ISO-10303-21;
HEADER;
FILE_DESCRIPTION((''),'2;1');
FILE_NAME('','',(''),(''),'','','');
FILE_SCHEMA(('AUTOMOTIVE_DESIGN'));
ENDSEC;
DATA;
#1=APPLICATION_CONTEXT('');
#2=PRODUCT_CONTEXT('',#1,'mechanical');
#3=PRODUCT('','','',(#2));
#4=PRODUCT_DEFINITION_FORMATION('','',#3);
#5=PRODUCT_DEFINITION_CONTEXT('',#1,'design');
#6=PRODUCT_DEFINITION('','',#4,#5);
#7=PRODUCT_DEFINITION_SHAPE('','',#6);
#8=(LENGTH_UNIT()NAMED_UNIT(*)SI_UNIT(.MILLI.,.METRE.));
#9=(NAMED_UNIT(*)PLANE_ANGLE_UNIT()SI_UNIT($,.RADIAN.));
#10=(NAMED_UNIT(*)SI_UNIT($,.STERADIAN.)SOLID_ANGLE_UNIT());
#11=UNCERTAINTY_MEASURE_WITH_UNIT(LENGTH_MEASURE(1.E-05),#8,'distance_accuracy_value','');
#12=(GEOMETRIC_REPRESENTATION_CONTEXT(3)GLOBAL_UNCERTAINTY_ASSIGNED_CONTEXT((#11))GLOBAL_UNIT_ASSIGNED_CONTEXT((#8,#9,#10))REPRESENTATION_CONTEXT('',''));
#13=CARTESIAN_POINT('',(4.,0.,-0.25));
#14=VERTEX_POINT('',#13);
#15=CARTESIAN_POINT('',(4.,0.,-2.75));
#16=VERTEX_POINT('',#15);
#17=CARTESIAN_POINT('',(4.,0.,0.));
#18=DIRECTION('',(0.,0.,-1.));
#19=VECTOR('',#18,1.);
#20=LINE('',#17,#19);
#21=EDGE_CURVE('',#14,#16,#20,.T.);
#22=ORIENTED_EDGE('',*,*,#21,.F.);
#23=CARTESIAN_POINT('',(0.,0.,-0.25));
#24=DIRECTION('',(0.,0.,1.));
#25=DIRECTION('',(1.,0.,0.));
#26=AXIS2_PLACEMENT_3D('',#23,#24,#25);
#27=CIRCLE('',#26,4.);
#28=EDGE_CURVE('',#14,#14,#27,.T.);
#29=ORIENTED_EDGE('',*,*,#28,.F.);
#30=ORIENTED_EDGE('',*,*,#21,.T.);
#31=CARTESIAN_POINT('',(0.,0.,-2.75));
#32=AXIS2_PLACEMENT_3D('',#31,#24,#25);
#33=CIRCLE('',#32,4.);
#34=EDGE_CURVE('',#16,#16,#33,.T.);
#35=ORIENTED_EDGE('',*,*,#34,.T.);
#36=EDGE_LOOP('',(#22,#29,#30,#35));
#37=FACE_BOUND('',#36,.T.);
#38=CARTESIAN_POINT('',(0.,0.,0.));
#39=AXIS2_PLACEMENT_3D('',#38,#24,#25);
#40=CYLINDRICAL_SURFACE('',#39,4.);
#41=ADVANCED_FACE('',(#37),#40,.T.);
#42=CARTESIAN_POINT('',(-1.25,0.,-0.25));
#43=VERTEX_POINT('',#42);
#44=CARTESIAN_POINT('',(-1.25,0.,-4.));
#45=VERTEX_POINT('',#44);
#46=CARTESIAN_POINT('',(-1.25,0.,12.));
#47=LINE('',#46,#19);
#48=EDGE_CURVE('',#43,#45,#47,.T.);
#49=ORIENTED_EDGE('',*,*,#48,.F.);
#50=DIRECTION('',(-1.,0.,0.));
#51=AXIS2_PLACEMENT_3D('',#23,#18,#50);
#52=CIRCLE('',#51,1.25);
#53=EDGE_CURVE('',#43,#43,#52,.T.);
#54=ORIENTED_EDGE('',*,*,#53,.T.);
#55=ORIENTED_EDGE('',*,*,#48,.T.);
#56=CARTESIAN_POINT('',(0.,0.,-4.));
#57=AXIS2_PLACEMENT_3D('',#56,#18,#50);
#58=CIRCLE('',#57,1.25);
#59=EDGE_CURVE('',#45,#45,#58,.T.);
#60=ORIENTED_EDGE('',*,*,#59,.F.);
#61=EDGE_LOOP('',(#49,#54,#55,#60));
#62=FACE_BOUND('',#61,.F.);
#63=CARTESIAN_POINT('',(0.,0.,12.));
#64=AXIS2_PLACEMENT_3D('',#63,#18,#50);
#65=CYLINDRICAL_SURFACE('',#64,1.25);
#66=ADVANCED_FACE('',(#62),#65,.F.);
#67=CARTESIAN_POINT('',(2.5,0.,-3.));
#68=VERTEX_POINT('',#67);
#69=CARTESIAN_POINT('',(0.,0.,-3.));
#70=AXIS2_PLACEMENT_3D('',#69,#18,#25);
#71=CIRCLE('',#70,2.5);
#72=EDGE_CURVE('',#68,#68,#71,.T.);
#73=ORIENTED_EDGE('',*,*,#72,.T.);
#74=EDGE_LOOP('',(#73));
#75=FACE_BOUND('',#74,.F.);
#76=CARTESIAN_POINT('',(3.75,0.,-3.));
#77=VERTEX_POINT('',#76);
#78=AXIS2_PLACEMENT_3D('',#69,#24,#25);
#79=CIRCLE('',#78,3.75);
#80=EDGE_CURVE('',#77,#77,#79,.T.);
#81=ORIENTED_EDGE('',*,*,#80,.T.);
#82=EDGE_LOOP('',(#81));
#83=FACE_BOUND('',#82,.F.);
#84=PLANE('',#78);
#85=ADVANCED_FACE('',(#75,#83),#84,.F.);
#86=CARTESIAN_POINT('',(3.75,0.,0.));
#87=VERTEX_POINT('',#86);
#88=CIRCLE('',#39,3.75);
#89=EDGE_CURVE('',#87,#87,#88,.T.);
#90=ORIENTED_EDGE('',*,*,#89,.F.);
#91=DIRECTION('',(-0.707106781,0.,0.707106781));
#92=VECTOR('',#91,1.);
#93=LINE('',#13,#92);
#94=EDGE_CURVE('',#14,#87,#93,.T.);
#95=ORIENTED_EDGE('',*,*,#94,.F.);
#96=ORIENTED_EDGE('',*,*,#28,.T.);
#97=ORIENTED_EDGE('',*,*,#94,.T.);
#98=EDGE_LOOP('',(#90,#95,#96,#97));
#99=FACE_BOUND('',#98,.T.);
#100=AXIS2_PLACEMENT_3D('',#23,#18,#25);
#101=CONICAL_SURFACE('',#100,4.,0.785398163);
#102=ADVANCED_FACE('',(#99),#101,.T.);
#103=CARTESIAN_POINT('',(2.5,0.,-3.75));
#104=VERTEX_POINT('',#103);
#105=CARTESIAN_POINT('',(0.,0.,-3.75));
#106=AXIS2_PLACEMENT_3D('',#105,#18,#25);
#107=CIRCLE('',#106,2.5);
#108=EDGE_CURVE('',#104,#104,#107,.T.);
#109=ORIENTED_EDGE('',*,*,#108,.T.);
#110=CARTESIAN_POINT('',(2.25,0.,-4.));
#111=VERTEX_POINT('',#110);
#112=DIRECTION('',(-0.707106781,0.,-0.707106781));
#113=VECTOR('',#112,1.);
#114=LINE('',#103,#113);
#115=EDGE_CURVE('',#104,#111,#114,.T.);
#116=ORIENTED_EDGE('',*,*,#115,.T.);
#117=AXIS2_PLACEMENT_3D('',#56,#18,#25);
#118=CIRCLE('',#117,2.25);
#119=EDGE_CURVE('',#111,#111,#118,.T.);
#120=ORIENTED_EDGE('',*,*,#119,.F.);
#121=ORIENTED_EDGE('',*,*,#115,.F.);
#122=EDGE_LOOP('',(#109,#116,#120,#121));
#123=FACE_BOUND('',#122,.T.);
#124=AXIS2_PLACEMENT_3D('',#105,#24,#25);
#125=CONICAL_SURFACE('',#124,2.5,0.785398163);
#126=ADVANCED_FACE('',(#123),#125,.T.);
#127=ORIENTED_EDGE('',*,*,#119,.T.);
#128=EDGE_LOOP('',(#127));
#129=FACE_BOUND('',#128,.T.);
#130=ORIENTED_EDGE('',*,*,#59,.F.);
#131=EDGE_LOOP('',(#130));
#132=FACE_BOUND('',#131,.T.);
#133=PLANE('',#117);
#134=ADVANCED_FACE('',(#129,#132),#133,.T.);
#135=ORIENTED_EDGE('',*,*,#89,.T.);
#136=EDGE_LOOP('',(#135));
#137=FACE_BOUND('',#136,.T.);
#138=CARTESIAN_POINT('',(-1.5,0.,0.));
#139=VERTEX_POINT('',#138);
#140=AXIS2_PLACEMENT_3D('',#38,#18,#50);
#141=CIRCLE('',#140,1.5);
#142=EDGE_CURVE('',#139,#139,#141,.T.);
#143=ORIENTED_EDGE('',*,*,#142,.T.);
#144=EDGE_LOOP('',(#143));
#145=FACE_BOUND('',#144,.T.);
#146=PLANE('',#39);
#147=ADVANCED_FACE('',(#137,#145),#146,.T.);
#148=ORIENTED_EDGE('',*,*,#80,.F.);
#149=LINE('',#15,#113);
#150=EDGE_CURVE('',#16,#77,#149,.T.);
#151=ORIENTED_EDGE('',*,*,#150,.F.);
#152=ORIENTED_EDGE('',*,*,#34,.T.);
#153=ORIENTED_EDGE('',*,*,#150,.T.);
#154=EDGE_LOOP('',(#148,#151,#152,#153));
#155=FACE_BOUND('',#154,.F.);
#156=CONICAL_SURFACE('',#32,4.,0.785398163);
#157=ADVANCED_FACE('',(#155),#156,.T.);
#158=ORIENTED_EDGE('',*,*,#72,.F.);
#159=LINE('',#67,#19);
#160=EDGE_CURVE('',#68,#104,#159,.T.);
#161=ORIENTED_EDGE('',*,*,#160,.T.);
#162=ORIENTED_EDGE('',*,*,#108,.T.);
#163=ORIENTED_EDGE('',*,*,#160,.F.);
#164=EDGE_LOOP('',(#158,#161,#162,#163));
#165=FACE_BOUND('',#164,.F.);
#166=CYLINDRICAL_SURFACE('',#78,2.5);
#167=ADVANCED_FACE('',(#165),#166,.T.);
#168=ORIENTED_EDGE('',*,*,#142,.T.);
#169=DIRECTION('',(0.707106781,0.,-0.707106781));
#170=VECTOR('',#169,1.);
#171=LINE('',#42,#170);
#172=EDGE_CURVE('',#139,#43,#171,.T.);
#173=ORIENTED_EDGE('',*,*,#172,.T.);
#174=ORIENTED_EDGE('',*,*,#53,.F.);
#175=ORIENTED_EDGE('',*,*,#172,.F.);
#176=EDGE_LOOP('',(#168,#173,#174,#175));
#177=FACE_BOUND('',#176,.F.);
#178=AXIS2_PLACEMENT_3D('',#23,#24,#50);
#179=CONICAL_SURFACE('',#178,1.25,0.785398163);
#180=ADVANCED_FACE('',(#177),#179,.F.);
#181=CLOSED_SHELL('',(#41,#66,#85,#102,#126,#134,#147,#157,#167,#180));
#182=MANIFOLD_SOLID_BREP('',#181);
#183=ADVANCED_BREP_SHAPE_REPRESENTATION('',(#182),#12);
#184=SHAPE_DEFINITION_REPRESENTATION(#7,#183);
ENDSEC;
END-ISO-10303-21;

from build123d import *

# Parameters (mm, degrees)
F0_R     = 4
F1_DEPTH = 3
F2_R     = 2.5
F3_DEPTH = 1
F5_D     = 2.5
F6_SIZE  = 0.25


with BuildPart() as f1:
    # F0 (on Top) → F1 (new body)
    with BuildSketch(Plane.XY):
        Circle(F0_R)
    extrude(amount=-F1_DEPTH)

    # F2 (on face) → F3 (join)
    with BuildSketch(Plane(origin=(0, 0, -3), x_dir=(1, 0, 0), z_dir=(0, 0, -1))):
        Circle(F2_R)
    extrude(amount=F3_DEPTH)

    # F5 (through all)
    with Locations(Plane.XY):
        with Locations((0, 0)):
            Hole(F5_D / 2)

    # F6
    f6_edges = [f1.edges().sort_by_distance(p)[0] for p in [
        (-4, 0, 0),
        (-4, 0, -3),
        (-2.5, 0, -4),
        (-1.25, 0, 0),
    ]]
    chamfer(f6_edges, length=F6_SIZE)


solid = f1.part
